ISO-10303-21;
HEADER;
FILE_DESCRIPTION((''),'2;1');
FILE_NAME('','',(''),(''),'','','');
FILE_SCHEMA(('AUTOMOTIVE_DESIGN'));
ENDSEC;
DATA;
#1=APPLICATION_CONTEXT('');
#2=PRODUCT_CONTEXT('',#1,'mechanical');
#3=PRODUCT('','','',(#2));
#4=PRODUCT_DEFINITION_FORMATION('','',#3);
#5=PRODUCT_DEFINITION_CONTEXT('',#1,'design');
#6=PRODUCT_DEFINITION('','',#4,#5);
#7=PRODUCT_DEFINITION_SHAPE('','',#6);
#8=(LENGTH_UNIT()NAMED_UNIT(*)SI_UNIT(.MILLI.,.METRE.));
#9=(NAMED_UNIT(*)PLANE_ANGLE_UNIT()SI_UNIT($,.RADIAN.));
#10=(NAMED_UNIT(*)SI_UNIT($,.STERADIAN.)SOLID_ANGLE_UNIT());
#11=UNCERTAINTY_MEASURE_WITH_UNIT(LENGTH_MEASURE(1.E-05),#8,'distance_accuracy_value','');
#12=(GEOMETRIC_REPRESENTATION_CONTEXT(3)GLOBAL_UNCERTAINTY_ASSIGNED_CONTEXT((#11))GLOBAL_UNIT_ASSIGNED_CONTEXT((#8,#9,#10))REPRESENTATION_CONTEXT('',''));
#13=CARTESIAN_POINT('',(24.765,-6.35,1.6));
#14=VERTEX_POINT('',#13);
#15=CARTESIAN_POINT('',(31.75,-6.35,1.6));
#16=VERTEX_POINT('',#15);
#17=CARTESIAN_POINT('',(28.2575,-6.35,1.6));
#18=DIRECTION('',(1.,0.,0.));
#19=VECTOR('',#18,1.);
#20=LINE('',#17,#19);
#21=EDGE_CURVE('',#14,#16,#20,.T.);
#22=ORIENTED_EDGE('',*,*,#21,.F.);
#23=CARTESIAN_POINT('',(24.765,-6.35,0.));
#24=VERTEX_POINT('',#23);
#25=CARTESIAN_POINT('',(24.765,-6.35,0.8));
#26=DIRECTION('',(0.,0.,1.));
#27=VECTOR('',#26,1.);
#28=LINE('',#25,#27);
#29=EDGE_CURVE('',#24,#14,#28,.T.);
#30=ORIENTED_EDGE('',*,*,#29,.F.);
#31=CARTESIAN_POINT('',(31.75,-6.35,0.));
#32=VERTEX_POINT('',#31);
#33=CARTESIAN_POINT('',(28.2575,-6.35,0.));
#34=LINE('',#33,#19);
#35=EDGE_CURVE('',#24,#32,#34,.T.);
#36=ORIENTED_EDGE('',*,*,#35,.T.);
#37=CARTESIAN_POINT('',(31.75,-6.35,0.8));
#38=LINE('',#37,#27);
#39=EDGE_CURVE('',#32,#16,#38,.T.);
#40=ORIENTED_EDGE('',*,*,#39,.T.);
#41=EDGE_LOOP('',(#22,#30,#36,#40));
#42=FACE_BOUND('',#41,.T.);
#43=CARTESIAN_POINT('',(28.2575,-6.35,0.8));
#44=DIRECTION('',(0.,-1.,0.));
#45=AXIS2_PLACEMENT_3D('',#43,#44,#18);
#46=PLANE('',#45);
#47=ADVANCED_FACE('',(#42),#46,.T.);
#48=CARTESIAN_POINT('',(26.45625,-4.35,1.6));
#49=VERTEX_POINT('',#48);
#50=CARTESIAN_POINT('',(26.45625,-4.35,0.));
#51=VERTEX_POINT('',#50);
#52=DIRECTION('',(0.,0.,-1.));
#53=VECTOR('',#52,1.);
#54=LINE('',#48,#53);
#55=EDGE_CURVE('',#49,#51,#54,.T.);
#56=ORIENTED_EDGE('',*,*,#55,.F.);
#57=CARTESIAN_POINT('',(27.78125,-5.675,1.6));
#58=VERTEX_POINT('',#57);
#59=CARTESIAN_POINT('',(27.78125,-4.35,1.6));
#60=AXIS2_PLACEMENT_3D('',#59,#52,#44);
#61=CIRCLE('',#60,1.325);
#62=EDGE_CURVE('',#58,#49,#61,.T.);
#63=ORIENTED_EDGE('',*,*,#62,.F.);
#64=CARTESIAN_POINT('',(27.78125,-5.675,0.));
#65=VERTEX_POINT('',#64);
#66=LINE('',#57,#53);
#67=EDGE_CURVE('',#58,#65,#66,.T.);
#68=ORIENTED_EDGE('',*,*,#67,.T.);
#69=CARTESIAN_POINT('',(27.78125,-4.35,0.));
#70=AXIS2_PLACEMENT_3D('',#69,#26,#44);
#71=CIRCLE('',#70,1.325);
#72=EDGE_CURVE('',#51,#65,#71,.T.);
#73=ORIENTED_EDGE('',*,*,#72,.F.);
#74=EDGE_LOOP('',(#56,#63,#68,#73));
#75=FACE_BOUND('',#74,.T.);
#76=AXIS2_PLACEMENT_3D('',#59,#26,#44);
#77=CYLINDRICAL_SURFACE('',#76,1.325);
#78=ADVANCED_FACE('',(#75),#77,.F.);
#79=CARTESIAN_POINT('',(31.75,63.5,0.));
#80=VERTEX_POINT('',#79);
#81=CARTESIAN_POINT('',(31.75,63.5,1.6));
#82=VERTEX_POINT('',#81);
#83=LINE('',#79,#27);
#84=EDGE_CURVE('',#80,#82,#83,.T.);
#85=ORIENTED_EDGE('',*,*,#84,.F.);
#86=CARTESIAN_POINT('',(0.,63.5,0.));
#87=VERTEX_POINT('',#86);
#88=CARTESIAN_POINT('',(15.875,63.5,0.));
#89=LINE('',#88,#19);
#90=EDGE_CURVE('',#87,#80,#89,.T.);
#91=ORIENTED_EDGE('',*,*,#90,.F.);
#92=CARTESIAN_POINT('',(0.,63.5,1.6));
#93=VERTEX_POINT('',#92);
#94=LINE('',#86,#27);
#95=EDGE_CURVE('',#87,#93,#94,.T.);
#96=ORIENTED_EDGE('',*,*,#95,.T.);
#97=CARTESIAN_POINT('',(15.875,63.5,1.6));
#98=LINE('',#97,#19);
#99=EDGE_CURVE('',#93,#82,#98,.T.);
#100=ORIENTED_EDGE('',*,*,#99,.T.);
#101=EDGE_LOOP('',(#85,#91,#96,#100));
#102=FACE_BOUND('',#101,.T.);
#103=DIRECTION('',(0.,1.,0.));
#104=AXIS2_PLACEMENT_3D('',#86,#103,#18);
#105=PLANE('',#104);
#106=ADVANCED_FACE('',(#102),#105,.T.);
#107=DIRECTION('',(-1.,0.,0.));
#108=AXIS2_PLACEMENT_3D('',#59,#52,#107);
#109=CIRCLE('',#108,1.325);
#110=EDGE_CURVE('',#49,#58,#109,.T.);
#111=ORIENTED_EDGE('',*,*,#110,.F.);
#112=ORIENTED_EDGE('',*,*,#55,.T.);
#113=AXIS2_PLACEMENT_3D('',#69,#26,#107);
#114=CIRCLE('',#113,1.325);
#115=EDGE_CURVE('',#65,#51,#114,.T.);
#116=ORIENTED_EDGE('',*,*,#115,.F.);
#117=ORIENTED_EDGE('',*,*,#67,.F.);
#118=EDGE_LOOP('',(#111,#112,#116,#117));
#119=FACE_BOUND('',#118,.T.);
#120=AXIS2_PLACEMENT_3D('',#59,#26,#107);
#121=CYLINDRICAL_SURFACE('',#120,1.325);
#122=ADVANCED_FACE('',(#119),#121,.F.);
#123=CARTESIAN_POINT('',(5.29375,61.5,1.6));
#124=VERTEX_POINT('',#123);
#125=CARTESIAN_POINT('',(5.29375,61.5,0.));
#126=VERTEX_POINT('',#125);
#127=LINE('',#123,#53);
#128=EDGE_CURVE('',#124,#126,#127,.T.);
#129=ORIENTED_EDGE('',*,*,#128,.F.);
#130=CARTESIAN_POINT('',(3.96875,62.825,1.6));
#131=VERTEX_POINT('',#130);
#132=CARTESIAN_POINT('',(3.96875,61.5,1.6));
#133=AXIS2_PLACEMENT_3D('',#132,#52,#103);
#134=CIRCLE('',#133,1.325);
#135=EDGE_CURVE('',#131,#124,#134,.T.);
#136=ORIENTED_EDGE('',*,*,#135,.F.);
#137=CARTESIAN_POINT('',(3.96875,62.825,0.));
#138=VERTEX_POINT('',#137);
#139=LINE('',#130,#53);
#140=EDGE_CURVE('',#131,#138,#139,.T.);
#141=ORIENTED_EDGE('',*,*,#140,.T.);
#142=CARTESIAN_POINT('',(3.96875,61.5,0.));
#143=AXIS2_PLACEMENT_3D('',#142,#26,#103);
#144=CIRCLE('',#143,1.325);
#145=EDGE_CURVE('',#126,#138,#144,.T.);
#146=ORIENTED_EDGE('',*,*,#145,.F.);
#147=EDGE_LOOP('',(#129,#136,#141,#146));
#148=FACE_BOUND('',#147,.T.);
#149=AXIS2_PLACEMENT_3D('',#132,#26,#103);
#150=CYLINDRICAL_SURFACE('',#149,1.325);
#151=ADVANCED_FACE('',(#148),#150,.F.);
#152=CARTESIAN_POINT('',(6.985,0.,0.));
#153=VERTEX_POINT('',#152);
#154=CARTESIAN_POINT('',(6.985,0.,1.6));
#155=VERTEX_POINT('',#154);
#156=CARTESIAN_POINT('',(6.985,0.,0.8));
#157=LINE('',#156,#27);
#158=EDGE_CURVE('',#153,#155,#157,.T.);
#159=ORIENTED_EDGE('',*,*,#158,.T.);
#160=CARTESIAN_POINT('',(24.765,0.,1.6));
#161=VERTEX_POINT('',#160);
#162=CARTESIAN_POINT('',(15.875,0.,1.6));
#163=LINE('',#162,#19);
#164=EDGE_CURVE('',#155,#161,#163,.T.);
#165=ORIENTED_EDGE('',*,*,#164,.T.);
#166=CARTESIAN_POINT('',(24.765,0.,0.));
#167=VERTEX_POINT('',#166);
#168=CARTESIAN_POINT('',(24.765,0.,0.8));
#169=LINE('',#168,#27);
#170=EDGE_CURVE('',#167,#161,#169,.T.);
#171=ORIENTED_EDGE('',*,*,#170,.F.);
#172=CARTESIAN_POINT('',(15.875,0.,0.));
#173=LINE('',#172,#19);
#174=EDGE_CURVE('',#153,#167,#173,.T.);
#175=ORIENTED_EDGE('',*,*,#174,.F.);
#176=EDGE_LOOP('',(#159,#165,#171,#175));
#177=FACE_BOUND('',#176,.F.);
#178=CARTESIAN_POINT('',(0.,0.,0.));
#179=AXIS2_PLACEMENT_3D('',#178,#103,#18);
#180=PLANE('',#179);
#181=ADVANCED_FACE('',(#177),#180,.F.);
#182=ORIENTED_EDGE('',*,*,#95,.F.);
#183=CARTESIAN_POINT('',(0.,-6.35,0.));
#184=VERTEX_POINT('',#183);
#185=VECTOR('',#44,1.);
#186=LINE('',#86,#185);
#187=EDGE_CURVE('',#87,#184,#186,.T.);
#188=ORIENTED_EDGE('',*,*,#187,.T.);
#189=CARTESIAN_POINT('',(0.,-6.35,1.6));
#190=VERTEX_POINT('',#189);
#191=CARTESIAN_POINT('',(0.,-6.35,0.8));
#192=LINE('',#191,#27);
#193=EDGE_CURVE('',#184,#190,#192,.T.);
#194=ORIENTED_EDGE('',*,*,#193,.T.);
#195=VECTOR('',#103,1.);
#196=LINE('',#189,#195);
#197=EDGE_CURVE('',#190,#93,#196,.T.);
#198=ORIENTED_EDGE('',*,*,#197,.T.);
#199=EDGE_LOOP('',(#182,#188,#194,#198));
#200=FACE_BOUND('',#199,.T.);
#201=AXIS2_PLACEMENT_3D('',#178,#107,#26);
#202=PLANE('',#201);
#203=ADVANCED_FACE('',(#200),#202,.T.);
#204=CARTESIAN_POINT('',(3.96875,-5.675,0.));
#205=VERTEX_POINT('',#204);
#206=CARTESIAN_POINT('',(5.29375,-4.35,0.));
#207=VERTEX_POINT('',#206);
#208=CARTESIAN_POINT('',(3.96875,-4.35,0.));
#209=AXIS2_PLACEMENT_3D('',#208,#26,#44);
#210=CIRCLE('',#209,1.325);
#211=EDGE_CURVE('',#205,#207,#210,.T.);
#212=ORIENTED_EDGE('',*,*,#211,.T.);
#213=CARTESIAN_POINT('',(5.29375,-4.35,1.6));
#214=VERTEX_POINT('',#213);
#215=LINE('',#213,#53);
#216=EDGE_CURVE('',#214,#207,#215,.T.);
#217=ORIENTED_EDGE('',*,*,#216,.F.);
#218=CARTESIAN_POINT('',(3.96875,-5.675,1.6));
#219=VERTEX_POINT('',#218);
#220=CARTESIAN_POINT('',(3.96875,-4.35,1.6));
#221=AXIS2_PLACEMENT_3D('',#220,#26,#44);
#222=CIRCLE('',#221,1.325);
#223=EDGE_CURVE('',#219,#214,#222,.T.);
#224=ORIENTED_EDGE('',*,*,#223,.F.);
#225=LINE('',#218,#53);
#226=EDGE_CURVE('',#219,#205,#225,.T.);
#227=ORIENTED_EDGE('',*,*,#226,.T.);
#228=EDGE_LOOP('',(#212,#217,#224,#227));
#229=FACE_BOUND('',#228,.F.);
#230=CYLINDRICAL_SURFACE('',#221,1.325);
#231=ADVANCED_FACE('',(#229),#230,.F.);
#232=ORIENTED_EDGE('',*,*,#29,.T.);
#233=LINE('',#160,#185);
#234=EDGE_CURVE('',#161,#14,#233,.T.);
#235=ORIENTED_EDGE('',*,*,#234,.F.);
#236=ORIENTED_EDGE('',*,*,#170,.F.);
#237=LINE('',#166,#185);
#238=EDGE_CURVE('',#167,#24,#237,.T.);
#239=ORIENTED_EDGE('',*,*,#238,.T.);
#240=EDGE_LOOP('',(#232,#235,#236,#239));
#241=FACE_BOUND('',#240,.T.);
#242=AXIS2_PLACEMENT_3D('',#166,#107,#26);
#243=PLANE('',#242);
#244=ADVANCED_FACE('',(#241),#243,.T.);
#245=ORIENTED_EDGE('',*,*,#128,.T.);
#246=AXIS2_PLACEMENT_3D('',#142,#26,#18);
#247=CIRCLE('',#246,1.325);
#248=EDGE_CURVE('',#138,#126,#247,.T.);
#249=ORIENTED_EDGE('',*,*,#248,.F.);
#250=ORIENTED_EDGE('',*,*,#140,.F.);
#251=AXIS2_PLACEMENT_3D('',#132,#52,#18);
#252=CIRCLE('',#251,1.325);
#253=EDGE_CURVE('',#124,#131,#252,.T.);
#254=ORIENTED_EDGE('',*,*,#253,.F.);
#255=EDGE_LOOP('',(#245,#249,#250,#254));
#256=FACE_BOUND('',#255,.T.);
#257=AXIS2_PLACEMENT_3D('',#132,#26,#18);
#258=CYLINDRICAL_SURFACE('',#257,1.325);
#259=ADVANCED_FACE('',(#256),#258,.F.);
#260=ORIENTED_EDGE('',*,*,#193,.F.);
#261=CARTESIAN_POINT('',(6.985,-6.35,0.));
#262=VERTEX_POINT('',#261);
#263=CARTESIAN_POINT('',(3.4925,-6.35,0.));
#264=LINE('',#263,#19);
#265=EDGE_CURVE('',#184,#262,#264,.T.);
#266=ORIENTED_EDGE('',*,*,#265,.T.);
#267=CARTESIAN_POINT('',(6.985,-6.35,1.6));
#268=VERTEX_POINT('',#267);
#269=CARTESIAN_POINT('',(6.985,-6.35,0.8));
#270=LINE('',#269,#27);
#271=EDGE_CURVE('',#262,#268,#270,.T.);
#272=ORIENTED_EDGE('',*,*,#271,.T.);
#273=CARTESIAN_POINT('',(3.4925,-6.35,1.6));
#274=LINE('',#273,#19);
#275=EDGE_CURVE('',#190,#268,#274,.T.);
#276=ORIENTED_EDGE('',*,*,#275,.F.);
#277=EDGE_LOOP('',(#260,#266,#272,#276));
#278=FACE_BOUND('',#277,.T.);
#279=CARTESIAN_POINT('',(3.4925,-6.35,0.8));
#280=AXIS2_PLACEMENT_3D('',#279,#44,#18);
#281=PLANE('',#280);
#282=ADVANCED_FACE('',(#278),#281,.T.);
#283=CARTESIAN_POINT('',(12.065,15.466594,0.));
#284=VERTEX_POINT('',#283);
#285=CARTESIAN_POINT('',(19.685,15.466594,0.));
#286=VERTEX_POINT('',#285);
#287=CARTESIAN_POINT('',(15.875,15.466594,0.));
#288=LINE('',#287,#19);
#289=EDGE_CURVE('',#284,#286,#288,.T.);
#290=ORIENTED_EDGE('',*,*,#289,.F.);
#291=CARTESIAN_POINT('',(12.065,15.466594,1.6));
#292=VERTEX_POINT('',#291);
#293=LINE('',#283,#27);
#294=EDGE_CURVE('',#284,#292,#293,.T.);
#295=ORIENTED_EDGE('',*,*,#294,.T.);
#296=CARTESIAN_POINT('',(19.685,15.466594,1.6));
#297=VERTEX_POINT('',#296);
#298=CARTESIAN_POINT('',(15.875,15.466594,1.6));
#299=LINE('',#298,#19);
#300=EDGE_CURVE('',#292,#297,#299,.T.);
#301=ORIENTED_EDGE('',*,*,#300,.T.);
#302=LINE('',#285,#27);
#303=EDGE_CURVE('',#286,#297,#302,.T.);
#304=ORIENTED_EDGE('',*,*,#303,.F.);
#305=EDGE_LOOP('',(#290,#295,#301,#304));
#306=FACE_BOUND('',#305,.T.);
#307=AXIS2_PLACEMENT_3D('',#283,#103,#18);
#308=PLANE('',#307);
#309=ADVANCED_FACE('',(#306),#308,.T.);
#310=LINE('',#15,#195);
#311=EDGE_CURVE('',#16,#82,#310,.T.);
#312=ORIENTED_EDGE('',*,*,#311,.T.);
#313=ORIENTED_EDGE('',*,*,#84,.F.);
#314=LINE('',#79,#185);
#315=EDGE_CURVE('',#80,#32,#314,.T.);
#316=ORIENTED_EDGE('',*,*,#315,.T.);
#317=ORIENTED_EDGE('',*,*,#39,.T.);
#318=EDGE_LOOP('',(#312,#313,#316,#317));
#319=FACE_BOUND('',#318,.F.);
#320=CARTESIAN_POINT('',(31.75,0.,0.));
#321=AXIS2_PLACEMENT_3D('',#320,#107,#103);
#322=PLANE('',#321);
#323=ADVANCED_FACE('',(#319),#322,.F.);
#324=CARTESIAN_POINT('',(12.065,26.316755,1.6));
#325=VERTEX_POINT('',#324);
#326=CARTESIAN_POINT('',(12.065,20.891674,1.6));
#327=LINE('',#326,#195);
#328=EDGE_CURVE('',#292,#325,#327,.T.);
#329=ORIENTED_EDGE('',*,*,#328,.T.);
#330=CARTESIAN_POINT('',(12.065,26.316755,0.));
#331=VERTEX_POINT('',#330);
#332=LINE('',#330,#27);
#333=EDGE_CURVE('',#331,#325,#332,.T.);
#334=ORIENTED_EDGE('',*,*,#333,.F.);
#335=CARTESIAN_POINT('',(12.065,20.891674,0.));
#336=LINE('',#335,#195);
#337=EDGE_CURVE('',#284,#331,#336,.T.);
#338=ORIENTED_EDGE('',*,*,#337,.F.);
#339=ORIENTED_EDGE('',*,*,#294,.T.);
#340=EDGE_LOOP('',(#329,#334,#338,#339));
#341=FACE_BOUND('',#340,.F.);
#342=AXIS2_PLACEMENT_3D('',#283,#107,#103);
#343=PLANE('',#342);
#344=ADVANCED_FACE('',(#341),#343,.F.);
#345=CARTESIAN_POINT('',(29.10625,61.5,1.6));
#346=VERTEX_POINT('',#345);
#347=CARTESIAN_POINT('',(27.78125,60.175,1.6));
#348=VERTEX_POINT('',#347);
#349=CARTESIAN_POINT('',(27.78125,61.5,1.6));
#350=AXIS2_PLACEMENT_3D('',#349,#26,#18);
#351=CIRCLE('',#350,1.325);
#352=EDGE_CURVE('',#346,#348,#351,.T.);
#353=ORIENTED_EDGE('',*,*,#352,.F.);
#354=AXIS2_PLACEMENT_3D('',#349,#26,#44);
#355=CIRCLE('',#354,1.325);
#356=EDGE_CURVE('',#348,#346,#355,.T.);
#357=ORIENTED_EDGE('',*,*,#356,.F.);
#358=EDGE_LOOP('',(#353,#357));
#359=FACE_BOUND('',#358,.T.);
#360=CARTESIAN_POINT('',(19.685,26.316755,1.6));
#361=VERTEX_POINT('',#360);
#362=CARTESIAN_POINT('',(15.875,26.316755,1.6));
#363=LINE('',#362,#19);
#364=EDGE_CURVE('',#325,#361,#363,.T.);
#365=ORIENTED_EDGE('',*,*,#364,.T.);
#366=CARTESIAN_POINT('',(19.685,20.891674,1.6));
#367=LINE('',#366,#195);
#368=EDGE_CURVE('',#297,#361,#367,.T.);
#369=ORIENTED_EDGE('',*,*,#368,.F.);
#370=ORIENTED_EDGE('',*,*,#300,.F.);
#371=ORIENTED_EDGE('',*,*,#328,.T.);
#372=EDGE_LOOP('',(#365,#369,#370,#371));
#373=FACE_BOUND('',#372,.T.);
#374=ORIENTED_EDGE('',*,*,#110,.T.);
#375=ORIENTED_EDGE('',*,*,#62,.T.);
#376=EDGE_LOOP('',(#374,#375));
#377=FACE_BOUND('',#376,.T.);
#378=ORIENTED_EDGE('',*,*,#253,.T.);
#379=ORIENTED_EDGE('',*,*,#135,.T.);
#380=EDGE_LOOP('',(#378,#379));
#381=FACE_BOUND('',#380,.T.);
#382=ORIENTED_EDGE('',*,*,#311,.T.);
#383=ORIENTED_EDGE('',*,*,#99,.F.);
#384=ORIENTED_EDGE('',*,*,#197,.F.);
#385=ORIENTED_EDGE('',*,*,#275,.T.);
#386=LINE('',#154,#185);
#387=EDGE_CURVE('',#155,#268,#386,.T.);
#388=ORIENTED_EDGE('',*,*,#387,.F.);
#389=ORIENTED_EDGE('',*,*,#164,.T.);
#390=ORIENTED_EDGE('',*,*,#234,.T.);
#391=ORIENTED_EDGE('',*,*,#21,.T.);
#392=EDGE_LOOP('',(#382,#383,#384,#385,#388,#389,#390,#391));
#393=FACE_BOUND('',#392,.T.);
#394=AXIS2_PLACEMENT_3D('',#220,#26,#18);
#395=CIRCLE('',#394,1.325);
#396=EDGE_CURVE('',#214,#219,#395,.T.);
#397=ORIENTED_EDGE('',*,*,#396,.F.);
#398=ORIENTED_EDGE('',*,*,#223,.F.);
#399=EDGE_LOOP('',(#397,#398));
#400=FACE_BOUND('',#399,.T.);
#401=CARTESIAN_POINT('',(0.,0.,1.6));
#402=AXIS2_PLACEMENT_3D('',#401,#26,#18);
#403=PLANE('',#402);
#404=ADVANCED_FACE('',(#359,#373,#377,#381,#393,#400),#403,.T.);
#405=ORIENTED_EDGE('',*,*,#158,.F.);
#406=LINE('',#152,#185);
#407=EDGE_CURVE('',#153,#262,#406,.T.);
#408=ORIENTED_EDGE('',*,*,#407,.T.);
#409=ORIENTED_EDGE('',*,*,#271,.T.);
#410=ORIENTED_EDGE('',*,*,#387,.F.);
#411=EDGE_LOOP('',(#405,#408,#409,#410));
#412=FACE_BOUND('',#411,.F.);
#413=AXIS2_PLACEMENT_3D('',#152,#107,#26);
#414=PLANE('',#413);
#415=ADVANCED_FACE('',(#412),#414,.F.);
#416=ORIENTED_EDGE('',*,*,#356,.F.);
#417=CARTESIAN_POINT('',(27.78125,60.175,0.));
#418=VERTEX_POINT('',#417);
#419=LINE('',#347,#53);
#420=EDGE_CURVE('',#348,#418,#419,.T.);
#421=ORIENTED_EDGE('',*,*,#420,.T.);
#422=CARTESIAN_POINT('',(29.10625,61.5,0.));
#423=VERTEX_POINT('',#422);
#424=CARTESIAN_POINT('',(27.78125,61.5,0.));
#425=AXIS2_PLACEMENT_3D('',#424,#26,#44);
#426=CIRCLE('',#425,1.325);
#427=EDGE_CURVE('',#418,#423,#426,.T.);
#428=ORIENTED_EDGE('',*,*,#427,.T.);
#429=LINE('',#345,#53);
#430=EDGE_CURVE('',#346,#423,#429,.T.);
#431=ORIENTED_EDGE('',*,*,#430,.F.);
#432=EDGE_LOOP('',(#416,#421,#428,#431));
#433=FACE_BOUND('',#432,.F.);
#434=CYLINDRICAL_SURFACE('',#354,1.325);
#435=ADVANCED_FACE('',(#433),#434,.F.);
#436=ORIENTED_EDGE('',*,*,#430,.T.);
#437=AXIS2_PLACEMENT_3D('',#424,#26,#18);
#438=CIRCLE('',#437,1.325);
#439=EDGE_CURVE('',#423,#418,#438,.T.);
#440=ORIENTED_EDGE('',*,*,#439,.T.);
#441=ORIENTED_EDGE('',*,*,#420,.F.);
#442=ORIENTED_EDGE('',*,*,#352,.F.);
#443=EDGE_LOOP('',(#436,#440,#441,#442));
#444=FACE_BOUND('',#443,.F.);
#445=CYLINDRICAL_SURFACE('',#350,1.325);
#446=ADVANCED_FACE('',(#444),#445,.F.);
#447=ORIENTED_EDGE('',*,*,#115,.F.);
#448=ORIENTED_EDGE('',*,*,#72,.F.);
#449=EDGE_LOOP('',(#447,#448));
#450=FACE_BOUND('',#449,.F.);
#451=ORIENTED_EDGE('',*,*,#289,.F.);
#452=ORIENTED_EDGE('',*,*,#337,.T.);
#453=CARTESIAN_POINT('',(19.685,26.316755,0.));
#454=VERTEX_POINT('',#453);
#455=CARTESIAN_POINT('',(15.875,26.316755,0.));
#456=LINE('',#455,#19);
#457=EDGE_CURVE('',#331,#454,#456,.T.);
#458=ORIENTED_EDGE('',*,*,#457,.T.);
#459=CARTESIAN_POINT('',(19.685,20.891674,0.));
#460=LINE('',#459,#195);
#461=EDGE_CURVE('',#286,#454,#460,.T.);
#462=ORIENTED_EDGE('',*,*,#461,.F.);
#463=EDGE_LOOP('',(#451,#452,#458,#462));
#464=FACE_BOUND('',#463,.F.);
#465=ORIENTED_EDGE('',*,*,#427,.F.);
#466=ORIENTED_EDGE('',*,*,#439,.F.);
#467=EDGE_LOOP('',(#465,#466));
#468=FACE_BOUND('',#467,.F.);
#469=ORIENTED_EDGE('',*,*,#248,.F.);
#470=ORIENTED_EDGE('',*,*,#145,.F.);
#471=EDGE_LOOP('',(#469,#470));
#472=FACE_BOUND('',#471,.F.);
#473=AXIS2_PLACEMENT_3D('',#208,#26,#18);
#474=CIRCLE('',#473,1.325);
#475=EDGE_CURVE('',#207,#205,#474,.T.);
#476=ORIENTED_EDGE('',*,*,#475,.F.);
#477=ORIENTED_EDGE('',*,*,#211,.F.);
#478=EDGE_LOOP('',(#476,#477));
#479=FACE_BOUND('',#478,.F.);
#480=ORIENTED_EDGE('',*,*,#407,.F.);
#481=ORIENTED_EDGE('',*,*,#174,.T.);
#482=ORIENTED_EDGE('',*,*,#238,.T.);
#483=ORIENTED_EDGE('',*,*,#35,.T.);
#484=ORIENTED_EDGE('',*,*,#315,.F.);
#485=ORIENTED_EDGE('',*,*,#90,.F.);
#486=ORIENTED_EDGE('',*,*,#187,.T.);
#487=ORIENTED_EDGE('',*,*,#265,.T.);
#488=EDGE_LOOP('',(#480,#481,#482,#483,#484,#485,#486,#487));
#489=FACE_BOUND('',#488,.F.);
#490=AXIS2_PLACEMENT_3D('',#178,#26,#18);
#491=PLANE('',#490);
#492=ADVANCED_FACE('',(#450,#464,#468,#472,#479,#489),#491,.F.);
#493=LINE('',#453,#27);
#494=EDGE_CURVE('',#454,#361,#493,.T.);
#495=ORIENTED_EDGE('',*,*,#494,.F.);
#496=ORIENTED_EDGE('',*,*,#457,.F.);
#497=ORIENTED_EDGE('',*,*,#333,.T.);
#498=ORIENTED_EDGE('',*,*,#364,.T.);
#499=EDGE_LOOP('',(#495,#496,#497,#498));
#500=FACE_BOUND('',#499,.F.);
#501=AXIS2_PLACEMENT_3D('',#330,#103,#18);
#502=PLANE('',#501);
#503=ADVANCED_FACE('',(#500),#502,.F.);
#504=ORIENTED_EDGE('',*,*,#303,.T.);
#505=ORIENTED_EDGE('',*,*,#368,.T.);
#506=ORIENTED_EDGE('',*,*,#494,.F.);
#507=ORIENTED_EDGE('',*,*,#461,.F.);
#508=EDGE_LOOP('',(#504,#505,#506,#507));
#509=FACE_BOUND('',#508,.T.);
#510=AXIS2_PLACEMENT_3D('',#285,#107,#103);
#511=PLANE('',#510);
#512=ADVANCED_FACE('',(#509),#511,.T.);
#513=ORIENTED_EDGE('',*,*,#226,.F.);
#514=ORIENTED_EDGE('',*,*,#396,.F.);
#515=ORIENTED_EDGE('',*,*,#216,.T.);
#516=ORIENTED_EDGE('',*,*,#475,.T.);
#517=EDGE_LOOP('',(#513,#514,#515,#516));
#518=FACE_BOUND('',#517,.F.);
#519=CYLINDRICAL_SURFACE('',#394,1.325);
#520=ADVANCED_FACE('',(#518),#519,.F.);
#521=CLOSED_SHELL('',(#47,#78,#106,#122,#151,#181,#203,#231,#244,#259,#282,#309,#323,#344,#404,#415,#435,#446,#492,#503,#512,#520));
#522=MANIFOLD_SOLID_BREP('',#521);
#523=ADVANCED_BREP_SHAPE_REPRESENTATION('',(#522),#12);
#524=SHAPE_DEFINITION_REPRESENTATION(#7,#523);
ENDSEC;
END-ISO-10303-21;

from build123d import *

# Parameters (mm, degrees)
F0_W             = 31.75
F0_H             = 63.5
F0_W_2           = 7.62
F0_H_2           = 10.8501603827
F1_DEPTH         = 1.6
F2_W             = 6.985
F2_H             = 1.6
F3_DEPTH         = 6.35
F5_DEPTH         = 25.4
F5_COPIES2_COUNT = 2
F5_COPIES2_PITCH = 70.023265


# Not quite as in the source:
# - a feature of the source that left no trace in its solid (it failed there, or was rolled back) is left out
# - a pattern or mirror of a feature is missing from the dataset's text; its kind, count and spacing are read off the source's solid
# - a feature names something its author has since deleted; it is built from what else it names


with BuildPart() as f1:
    # F0 (on Top) → F1 (new body)
    with BuildSketch(Plane.XY):
        with Locations((15.875, 31.75)):
            Rectangle(F0_W, F0_H)
        with Locations((15.875, 20.8916743286)):
            Rectangle(F0_W_2, F0_H_2, mode=Mode.SUBTRACT)
    extrude(amount=F1_DEPTH)

    # F2 (on face) → F3 (join)
    with BuildSketch(Plane.XZ):
        with Locations((3.4925, 0.8)):
            Rectangle(F2_W, F2_H)
        with Locations((28.2575, 0.8)):
            Rectangle(F2_W, F2_H)
    extrude(amount=F3_DEPTH)

    # F4 (on face) → F5 (cut)
    with BuildSketch(Plane.XY.offset(1.6)):
        with BuildLine():
            ThreePointArc((5.29375, -4.35), (3.0318335149, -3.4130835149), (3.96875, -5.675))
            Line((3.96875, -5.675), (3.96875, -4.35))
            Line((3.96875, -4.35), (5.29375, -4.35))
        make_face()
        with BuildLine():
            Line((3.96875, -4.35), (3.96875, -5.675))
            ThreePointArc((3.96875, -5.675), (4.9056664851, -5.2869164851), (5.29375, -4.35))
            Line((5.29375, -4.35), (3.96875, -4.35))
        make_face()
    f5 = extrude(amount=-F5_DEPTH, mode=Mode.SUBTRACT)

    # F5_copies: F5 across plane
    add(f5.mirror(Plane.ZX.offset(28.575)), mode=Mode.SUBTRACT)

    # F5_copies1: F5 across plane
    add(f5.mirror(Plane(origin=(15.875, 0, 0), x_dir=(0, 0, 1), z_dir=(1, 0, 0))), mode=Mode.SUBTRACT)

    # F5_copies2: F5 ×2
    with Locations(*[Vector(0.3400655477, 0.940401735, 0) * (i * F5_COPIES2_PITCH) for i in range(1, F5_COPIES2_COUNT)]):
        add(f5, mode=Mode.SUBTRACT)


solid = f1.part
